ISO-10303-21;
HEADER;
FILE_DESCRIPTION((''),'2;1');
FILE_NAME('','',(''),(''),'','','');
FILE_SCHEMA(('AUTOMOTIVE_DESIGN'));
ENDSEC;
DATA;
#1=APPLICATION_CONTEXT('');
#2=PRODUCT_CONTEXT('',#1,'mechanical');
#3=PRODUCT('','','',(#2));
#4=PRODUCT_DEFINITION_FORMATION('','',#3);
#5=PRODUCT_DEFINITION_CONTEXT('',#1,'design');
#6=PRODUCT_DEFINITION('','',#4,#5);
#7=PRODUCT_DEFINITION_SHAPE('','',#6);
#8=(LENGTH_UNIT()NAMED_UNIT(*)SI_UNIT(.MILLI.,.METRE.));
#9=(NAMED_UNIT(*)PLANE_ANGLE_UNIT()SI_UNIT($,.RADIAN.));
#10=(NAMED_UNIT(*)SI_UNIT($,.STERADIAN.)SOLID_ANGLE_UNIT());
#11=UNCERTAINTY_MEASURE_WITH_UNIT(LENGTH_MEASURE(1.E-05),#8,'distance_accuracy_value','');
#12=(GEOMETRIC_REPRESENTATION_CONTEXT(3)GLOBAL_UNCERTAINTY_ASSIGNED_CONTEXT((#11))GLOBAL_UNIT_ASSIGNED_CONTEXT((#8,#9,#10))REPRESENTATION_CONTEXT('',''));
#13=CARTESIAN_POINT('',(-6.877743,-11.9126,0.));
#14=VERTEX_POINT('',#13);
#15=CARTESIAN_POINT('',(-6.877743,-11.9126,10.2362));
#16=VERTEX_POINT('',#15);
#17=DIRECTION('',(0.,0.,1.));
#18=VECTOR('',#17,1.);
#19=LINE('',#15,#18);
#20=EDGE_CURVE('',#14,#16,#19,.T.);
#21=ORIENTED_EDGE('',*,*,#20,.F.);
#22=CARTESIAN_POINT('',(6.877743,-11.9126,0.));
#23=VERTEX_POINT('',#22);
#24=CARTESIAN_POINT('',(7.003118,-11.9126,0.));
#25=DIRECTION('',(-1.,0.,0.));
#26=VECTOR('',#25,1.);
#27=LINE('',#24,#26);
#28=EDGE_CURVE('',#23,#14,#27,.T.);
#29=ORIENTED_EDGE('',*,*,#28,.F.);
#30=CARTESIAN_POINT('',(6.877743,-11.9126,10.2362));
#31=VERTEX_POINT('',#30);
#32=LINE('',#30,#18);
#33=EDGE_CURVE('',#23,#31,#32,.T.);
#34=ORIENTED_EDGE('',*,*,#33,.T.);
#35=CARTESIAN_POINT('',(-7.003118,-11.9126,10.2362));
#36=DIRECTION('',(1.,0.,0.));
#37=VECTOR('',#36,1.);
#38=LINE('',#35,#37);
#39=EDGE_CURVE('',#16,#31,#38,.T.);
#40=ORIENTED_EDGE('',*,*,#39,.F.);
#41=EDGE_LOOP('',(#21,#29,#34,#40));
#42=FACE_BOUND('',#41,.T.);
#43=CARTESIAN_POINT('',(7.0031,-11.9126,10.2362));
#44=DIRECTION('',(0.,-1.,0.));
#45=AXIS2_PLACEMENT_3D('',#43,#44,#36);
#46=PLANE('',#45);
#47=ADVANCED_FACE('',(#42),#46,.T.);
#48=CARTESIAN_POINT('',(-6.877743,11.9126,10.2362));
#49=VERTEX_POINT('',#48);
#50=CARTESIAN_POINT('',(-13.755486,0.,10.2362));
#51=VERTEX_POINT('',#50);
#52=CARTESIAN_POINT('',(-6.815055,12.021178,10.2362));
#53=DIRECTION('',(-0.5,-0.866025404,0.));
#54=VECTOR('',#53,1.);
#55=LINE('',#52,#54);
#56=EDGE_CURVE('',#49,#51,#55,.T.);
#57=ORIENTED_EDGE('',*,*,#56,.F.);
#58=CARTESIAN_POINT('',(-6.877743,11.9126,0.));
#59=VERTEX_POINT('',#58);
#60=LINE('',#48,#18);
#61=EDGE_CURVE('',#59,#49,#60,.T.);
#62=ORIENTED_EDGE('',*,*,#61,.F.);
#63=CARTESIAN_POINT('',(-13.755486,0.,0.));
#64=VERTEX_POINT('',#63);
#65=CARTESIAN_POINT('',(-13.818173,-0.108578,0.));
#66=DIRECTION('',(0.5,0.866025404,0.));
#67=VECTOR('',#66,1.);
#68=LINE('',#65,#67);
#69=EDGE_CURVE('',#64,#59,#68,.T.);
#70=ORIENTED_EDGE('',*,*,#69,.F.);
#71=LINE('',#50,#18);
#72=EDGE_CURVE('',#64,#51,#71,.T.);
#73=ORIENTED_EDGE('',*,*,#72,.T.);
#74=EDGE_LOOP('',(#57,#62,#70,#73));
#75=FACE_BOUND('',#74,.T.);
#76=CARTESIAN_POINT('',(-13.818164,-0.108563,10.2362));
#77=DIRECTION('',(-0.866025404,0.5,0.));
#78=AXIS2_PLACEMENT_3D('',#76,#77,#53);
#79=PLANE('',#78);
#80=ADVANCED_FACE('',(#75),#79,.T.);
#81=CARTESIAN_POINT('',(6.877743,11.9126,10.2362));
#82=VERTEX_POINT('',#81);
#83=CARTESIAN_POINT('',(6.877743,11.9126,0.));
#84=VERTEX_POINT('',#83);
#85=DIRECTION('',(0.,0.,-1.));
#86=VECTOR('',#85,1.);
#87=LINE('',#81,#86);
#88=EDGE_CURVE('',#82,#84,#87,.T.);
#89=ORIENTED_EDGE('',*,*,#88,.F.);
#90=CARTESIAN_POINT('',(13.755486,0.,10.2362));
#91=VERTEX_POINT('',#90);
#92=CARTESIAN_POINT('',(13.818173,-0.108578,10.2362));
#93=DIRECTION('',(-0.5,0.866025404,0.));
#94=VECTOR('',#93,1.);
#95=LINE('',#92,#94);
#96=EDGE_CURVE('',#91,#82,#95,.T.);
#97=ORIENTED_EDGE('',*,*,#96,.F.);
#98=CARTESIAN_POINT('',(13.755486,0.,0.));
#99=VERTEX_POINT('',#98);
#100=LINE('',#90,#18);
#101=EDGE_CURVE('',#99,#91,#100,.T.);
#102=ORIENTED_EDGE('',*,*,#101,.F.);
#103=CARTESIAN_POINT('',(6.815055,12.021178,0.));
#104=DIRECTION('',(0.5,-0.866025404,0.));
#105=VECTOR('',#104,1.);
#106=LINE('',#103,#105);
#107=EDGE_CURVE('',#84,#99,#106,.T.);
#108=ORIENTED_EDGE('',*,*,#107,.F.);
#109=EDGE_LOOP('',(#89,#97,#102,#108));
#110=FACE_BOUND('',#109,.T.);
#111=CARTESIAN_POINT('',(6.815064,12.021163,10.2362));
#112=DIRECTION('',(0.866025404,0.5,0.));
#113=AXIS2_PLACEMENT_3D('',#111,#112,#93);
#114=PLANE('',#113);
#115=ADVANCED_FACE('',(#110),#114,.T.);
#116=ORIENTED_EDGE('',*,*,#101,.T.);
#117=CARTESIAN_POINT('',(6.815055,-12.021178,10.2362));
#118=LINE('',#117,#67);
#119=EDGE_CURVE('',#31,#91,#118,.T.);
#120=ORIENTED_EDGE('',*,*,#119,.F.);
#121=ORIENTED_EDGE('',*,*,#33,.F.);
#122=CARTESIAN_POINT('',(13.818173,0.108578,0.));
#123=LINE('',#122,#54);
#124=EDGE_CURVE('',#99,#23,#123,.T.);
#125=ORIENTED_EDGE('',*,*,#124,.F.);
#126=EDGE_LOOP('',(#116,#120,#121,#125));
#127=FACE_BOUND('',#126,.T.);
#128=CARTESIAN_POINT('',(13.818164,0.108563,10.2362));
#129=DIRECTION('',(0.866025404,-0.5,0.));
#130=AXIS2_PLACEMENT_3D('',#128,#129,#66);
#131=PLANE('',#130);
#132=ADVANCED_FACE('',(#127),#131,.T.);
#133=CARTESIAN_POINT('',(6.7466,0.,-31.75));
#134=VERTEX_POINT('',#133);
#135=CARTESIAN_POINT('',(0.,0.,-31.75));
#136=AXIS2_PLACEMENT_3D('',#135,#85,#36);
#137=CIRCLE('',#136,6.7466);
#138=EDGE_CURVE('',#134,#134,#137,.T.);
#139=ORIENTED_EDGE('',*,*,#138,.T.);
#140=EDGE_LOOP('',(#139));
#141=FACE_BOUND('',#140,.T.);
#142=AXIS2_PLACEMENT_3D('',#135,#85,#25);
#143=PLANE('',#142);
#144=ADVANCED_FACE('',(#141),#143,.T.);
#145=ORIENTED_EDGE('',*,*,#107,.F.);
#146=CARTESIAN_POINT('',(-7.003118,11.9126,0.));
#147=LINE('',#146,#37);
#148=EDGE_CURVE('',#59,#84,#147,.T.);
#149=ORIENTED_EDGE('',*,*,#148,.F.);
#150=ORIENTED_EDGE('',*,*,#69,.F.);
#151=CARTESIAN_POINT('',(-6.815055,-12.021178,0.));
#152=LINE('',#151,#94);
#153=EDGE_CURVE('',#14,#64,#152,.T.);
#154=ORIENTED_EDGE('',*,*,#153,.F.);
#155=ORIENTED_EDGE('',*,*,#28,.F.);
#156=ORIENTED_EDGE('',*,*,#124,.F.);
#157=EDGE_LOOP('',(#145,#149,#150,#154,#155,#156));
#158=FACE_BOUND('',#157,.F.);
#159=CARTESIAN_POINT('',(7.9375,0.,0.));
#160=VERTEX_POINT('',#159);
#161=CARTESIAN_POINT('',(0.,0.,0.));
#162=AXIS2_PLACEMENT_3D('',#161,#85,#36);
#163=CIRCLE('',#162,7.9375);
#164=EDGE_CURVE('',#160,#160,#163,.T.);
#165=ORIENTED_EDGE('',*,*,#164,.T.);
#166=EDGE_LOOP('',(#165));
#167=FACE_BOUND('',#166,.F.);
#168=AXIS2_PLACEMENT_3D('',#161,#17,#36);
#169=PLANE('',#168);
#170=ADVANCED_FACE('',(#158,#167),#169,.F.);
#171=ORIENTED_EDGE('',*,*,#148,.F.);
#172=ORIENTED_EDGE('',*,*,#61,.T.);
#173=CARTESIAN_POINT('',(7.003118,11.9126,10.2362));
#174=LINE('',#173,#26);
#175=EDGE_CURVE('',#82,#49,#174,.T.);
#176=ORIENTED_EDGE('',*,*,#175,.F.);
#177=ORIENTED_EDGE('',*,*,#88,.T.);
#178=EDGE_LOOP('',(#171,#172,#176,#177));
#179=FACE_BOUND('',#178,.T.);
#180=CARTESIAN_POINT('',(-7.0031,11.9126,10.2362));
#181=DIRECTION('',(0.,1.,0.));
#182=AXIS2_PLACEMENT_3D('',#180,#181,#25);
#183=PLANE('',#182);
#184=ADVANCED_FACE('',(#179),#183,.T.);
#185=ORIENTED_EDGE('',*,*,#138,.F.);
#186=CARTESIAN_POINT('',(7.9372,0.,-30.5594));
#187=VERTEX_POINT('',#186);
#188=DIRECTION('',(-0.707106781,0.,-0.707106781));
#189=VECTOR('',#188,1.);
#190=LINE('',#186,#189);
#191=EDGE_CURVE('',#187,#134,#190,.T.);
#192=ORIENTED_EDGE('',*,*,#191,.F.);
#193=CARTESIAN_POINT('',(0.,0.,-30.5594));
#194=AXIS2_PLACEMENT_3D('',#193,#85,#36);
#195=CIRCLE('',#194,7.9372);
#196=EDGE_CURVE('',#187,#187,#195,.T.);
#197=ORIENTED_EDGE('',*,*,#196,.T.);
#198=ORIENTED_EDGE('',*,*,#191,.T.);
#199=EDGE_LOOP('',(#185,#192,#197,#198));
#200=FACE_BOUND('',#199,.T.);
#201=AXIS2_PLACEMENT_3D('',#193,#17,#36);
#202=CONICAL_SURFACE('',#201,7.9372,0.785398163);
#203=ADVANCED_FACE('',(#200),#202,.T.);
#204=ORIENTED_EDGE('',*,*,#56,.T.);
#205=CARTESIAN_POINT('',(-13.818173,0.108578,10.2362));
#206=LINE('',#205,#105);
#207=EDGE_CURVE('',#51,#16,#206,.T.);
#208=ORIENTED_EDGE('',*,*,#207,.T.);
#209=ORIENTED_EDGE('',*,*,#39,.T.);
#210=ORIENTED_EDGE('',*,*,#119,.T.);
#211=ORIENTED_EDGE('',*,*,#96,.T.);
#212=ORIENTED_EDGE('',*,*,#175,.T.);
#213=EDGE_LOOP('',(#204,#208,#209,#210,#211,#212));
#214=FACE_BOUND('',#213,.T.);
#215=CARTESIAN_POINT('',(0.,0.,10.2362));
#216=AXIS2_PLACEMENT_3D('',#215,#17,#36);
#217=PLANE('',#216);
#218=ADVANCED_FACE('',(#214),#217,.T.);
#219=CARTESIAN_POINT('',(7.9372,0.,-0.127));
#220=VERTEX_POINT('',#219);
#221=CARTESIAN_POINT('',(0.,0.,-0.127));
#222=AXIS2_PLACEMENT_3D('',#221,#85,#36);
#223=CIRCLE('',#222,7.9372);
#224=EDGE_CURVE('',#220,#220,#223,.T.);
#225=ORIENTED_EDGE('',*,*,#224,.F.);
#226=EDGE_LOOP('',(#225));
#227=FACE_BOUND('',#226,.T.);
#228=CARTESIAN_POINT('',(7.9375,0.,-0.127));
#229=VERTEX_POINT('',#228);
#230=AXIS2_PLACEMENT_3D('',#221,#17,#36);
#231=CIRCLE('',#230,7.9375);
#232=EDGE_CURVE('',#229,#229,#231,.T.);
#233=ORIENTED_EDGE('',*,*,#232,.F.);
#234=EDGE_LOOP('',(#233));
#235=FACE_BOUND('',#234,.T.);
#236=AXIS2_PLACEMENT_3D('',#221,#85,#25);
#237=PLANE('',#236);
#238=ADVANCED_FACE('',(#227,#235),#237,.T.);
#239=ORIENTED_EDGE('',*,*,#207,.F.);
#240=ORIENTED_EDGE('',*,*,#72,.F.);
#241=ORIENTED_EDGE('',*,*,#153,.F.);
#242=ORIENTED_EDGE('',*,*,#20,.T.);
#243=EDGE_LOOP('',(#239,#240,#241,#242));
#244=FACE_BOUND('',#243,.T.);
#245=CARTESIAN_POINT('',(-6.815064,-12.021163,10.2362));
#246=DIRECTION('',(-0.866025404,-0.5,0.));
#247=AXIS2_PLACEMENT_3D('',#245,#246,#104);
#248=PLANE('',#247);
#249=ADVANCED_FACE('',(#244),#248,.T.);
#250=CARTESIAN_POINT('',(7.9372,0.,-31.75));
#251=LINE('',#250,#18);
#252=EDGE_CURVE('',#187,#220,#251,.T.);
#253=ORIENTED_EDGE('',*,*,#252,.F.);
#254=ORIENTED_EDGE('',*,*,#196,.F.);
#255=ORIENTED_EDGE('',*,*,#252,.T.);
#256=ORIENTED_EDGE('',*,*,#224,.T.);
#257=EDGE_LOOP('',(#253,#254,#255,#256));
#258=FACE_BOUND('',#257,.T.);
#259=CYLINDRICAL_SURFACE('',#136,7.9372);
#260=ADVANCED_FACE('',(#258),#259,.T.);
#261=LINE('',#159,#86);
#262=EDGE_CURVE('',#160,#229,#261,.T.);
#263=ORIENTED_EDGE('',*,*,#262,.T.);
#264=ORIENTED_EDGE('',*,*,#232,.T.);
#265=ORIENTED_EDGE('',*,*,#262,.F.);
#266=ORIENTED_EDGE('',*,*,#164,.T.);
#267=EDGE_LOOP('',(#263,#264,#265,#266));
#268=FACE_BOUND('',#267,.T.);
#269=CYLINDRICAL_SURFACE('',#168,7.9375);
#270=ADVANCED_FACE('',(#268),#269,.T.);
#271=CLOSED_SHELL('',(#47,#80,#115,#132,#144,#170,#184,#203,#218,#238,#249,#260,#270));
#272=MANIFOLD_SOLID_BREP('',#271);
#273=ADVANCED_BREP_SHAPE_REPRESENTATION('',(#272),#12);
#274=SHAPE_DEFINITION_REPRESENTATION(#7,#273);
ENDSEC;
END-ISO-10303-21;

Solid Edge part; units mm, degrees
sketch "Sketch1" plane through (0, 0, 0) normal (0, 0, 1) x (1, 0, 0)
  circle A0 centre (0, 0) radius 13.8186
  dimension "D1" = 27.6372
extrude "Protrusion1" add sketch "Sketch1" along normal blind 10.2362
sketch "Sketch2" plane through (0, 0, 0) normal (0, 0, -1) x (1, 0, 0)
  circle A0 centre (0, 0) radius 7.9375
extrude "Protrusion2" add sketch "Sketch2" along normal blind 31.75
sketch "Sketch3" plane through (0, 0, -31.75) normal (0, 0, -1) x (1, 0, 0)
  circle A0 centre (0, 0) radius 7.9372
extrude "Cutout1" cut sketch "Sketch3" against normal blind 31.623 flip side to cut
chamfer "Chamfer_1" distance 1.1906 angle 45 1 edges at (-7.9372, 0, -31.75)
sketch "Sketch4" plane through (0, 0, 10.2362) normal (0, 0, 1) x (1, 0, 0)
  line L0 (-7.0031, 11.9126) -> (7.0031, 11.9126)
  dimension "D1" = 23.8252
extrude "Cutout2" cut sketch "Sketch4" against normal up to next material side at (0, 11.9626, 10.2362)
pattern_circular "Pattern1" count 6 over 360 about axis through (0, 0, 10.2362) along (0, 0, 1) of "Cutout2"
properties part number "117653"
